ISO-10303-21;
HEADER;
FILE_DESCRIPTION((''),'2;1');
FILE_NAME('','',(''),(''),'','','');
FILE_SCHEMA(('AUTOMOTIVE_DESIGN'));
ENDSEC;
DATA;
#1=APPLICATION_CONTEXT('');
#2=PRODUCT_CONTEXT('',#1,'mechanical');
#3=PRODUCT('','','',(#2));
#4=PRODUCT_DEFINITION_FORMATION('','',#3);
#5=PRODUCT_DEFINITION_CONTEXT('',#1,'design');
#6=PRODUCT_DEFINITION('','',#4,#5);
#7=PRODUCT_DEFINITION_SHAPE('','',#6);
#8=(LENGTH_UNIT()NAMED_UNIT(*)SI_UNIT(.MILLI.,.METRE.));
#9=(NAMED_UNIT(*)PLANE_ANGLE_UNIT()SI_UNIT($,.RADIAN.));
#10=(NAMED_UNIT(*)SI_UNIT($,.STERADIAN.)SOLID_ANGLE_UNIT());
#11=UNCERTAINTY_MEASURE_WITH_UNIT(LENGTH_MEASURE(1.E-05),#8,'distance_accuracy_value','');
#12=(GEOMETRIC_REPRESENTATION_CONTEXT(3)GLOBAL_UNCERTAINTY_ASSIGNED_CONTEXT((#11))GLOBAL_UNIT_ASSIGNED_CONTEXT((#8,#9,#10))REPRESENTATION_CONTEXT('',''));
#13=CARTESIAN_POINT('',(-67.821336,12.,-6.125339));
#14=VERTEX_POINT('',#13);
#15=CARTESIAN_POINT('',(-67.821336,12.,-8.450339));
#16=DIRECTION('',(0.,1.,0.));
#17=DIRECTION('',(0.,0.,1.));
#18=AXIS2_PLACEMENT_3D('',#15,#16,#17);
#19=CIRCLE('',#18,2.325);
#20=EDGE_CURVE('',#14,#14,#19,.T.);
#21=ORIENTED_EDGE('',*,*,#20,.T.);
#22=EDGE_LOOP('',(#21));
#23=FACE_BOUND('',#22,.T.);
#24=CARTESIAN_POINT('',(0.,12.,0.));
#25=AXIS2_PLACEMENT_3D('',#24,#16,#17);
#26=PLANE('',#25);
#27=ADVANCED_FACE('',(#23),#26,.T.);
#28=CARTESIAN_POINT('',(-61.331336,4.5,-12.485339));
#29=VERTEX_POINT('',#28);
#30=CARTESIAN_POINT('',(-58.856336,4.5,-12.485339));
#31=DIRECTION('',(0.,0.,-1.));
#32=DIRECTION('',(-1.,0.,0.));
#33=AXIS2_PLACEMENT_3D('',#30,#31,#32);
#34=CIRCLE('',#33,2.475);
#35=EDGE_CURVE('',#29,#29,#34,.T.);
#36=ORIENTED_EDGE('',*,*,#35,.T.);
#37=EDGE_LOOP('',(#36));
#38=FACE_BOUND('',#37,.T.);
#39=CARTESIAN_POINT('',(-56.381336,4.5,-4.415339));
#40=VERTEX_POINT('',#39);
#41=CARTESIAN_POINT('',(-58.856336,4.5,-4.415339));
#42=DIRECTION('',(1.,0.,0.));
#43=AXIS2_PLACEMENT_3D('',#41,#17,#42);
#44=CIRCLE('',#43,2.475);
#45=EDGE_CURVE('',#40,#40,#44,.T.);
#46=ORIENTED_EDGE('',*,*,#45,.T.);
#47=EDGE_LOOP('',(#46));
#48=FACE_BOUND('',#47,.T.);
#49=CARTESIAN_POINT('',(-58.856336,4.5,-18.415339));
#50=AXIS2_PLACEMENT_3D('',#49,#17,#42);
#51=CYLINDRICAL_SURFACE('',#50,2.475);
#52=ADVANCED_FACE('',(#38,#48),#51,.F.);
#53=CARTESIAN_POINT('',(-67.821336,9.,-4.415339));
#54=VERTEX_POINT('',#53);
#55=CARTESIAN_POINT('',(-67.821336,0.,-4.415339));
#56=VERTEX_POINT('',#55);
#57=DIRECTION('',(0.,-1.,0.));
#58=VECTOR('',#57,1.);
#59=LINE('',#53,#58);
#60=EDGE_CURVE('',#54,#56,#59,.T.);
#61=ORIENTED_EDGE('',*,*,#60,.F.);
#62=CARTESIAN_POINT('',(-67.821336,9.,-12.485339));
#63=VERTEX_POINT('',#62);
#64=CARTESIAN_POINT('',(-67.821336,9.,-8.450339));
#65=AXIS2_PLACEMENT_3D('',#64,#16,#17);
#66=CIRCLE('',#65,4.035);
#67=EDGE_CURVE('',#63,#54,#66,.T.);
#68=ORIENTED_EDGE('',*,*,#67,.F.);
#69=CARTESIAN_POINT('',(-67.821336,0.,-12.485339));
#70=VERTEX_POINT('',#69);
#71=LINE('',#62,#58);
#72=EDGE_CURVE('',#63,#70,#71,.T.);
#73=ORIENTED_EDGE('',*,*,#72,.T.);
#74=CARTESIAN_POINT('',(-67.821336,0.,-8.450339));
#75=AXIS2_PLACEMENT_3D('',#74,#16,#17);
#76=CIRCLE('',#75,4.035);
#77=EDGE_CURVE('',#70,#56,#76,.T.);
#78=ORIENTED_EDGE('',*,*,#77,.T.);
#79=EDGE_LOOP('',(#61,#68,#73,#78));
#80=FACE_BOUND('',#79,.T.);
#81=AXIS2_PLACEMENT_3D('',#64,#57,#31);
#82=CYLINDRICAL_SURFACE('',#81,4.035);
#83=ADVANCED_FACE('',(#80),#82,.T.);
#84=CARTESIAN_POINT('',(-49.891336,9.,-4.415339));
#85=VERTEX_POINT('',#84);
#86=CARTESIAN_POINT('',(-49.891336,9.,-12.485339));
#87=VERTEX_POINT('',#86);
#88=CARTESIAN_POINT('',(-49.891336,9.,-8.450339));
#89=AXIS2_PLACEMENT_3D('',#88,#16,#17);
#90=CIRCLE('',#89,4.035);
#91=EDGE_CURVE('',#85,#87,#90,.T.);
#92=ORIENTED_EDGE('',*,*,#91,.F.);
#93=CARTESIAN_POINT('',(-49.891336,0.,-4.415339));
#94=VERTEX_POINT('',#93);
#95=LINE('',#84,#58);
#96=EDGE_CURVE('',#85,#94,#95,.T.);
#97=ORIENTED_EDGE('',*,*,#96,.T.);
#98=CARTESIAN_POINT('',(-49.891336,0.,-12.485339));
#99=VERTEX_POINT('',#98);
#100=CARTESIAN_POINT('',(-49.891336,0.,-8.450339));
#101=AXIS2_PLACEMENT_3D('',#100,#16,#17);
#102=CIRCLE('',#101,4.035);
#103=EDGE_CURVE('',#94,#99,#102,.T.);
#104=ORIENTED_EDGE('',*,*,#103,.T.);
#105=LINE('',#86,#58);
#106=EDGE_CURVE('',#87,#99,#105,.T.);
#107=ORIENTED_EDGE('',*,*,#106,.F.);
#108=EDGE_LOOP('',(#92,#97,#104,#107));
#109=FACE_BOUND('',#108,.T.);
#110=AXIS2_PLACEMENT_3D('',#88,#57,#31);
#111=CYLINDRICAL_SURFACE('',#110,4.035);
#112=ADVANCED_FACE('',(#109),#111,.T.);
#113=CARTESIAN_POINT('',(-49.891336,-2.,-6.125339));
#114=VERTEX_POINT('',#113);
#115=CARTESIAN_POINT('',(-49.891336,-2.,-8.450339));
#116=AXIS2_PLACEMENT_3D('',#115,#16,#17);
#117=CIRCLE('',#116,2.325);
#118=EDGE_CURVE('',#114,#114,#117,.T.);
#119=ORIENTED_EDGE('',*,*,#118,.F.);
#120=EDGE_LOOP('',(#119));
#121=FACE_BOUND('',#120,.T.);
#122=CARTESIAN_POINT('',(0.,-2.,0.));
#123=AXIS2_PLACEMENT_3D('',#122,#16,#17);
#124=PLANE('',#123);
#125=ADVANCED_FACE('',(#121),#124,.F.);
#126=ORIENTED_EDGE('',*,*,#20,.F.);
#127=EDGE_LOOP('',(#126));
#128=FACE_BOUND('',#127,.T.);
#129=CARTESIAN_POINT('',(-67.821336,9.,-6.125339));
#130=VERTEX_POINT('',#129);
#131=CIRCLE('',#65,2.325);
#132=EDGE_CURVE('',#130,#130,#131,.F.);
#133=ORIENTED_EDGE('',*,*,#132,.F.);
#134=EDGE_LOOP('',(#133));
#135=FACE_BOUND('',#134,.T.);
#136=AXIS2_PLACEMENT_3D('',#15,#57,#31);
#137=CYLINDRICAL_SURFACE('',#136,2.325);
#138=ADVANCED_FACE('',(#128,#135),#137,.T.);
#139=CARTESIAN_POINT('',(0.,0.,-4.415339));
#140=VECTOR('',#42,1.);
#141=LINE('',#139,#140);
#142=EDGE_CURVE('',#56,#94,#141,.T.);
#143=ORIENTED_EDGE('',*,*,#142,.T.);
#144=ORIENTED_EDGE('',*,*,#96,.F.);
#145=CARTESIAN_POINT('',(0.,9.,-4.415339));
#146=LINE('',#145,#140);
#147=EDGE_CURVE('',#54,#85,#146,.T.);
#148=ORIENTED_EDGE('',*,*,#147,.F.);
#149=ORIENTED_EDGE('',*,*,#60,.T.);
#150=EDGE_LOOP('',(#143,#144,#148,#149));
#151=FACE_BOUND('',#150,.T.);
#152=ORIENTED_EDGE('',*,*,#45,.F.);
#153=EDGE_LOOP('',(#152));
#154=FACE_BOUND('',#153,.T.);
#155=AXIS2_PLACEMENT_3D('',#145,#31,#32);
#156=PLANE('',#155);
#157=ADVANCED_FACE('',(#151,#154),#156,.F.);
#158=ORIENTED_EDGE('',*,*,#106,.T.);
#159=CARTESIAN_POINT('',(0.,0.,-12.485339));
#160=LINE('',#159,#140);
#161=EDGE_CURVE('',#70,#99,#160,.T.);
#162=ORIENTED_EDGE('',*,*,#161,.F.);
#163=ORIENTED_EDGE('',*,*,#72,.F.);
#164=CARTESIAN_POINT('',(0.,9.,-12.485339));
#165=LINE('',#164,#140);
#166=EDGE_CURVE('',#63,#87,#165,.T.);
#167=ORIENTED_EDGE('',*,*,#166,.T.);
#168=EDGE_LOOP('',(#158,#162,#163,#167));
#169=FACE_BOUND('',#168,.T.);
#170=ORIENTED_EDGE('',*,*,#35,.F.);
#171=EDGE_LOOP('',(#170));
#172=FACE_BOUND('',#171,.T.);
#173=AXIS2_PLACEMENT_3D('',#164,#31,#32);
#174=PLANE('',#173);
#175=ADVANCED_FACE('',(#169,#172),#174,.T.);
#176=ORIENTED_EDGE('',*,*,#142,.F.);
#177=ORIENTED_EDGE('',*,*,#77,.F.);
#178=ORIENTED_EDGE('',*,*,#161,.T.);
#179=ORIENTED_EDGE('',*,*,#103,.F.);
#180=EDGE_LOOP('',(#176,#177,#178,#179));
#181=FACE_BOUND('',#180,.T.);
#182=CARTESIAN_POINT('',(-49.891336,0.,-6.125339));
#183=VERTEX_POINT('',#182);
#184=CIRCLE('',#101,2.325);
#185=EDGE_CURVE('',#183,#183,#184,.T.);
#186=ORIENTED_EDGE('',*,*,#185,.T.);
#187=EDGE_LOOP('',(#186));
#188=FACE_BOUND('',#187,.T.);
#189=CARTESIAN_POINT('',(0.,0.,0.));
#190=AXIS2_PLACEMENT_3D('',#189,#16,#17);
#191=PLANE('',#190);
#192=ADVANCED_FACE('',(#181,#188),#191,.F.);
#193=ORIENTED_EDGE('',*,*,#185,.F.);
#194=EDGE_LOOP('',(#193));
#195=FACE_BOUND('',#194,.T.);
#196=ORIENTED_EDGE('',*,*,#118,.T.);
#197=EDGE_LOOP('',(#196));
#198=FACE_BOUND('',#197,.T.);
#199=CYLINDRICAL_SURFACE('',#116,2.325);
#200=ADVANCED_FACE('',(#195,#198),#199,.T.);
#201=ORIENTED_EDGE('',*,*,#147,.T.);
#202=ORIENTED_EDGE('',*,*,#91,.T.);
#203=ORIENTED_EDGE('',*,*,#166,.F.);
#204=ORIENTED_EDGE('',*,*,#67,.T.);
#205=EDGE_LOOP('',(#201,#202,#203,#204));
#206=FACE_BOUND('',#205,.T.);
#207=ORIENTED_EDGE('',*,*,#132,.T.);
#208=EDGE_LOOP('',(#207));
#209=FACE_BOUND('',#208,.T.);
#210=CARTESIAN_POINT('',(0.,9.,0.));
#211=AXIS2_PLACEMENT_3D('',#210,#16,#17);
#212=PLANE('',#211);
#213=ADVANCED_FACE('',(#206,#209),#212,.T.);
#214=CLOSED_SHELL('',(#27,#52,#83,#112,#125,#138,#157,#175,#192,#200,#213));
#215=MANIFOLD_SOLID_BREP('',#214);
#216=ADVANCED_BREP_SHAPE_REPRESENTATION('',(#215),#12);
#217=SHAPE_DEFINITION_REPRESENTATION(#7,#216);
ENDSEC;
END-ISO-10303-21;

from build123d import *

# Parameters (mm, degrees)
BOSS_EXTRUDE2_DEPTH      = 9
CUT_EXTRUDE2_START       = -12.485338913
CUT_EXTRUDE2_OUTLINE_R   = 2.475
CUT_EXTRUDE2_DEPTH       = 8.07
BOSS_EXTRUDE3_DEPTH      = 9
BOSS_EXTRUDE3_DEPTH_BACK = 2
SKETCH1_6_R              = 2.325
SKETCH1_7_R              = 2.325
BOSS_EXTRUDE4_DEPTH      = 12


# Read off the part's stored shape, not the designer's step: Cut-Extrude2
with BuildPart() as part:
    # Sketch1 → Boss-Extrude2 (new body)
    with BuildSketch(Plane(origin=(0, 0, 0), x_dir=(1, 0, 0), z_dir=(0, 1, 0))):
        with BuildLine():
            Line((-49.891335879, 12.485338913), (-67.821335879, 12.485338913))
            ThreePointArc((-67.821335879, 12.485338913), (-71.856335879, 8.450338913), (-67.821335879, 4.415338913))
            Line((-67.821335879, 4.415338913), (-49.891335879, 4.415338913))
            ThreePointArc((-49.891335879, 4.415338913), (-45.856335879, 8.450338913), (-49.891335879, 12.485338913))
        make_face()
    extrude(amount=BOSS_EXTRUDE2_DEPTH)

    # Cut-Extrude2 outline → Cut-Extrude2 (cut)
    with BuildSketch(Plane.XY.offset(CUT_EXTRUDE2_START)):
        with Locations((-58.856335879, 4.5)):
            Circle(CUT_EXTRUDE2_OUTLINE_R)
    extrude(amount=CUT_EXTRUDE2_DEPTH, mode=Mode.SUBTRACT)

    # Sketch1<6> → Boss-Extrude3 (add, two sides: drawn at the far end of the back side and taken through both)
    with BuildSketch(Plane(origin=(0, 0, 0), x_dir=(1, 0, 0), z_dir=(0, 1, 0)).offset(-BOSS_EXTRUDE3_DEPTH_BACK)):
        with Locations(Location((-49.891335879, 8.450338913, 0), (0, 0, 270))):
            Circle(SKETCH1_6_R)
    extrude(amount=BOSS_EXTRUDE3_DEPTH + BOSS_EXTRUDE3_DEPTH_BACK)

    # Sketch1<7> → Boss-Extrude4 (add)
    with BuildSketch(Plane(origin=(0, 0, 0), x_dir=(1, 0, 0), z_dir=(0, 1, 0))):
        with Locations(Location((-67.821335879, 8.450338913, 0), (0, 0, 270))):
            Circle(SKETCH1_7_R)
    extrude(amount=BOSS_EXTRUDE4_DEPTH)


solid = part.part
